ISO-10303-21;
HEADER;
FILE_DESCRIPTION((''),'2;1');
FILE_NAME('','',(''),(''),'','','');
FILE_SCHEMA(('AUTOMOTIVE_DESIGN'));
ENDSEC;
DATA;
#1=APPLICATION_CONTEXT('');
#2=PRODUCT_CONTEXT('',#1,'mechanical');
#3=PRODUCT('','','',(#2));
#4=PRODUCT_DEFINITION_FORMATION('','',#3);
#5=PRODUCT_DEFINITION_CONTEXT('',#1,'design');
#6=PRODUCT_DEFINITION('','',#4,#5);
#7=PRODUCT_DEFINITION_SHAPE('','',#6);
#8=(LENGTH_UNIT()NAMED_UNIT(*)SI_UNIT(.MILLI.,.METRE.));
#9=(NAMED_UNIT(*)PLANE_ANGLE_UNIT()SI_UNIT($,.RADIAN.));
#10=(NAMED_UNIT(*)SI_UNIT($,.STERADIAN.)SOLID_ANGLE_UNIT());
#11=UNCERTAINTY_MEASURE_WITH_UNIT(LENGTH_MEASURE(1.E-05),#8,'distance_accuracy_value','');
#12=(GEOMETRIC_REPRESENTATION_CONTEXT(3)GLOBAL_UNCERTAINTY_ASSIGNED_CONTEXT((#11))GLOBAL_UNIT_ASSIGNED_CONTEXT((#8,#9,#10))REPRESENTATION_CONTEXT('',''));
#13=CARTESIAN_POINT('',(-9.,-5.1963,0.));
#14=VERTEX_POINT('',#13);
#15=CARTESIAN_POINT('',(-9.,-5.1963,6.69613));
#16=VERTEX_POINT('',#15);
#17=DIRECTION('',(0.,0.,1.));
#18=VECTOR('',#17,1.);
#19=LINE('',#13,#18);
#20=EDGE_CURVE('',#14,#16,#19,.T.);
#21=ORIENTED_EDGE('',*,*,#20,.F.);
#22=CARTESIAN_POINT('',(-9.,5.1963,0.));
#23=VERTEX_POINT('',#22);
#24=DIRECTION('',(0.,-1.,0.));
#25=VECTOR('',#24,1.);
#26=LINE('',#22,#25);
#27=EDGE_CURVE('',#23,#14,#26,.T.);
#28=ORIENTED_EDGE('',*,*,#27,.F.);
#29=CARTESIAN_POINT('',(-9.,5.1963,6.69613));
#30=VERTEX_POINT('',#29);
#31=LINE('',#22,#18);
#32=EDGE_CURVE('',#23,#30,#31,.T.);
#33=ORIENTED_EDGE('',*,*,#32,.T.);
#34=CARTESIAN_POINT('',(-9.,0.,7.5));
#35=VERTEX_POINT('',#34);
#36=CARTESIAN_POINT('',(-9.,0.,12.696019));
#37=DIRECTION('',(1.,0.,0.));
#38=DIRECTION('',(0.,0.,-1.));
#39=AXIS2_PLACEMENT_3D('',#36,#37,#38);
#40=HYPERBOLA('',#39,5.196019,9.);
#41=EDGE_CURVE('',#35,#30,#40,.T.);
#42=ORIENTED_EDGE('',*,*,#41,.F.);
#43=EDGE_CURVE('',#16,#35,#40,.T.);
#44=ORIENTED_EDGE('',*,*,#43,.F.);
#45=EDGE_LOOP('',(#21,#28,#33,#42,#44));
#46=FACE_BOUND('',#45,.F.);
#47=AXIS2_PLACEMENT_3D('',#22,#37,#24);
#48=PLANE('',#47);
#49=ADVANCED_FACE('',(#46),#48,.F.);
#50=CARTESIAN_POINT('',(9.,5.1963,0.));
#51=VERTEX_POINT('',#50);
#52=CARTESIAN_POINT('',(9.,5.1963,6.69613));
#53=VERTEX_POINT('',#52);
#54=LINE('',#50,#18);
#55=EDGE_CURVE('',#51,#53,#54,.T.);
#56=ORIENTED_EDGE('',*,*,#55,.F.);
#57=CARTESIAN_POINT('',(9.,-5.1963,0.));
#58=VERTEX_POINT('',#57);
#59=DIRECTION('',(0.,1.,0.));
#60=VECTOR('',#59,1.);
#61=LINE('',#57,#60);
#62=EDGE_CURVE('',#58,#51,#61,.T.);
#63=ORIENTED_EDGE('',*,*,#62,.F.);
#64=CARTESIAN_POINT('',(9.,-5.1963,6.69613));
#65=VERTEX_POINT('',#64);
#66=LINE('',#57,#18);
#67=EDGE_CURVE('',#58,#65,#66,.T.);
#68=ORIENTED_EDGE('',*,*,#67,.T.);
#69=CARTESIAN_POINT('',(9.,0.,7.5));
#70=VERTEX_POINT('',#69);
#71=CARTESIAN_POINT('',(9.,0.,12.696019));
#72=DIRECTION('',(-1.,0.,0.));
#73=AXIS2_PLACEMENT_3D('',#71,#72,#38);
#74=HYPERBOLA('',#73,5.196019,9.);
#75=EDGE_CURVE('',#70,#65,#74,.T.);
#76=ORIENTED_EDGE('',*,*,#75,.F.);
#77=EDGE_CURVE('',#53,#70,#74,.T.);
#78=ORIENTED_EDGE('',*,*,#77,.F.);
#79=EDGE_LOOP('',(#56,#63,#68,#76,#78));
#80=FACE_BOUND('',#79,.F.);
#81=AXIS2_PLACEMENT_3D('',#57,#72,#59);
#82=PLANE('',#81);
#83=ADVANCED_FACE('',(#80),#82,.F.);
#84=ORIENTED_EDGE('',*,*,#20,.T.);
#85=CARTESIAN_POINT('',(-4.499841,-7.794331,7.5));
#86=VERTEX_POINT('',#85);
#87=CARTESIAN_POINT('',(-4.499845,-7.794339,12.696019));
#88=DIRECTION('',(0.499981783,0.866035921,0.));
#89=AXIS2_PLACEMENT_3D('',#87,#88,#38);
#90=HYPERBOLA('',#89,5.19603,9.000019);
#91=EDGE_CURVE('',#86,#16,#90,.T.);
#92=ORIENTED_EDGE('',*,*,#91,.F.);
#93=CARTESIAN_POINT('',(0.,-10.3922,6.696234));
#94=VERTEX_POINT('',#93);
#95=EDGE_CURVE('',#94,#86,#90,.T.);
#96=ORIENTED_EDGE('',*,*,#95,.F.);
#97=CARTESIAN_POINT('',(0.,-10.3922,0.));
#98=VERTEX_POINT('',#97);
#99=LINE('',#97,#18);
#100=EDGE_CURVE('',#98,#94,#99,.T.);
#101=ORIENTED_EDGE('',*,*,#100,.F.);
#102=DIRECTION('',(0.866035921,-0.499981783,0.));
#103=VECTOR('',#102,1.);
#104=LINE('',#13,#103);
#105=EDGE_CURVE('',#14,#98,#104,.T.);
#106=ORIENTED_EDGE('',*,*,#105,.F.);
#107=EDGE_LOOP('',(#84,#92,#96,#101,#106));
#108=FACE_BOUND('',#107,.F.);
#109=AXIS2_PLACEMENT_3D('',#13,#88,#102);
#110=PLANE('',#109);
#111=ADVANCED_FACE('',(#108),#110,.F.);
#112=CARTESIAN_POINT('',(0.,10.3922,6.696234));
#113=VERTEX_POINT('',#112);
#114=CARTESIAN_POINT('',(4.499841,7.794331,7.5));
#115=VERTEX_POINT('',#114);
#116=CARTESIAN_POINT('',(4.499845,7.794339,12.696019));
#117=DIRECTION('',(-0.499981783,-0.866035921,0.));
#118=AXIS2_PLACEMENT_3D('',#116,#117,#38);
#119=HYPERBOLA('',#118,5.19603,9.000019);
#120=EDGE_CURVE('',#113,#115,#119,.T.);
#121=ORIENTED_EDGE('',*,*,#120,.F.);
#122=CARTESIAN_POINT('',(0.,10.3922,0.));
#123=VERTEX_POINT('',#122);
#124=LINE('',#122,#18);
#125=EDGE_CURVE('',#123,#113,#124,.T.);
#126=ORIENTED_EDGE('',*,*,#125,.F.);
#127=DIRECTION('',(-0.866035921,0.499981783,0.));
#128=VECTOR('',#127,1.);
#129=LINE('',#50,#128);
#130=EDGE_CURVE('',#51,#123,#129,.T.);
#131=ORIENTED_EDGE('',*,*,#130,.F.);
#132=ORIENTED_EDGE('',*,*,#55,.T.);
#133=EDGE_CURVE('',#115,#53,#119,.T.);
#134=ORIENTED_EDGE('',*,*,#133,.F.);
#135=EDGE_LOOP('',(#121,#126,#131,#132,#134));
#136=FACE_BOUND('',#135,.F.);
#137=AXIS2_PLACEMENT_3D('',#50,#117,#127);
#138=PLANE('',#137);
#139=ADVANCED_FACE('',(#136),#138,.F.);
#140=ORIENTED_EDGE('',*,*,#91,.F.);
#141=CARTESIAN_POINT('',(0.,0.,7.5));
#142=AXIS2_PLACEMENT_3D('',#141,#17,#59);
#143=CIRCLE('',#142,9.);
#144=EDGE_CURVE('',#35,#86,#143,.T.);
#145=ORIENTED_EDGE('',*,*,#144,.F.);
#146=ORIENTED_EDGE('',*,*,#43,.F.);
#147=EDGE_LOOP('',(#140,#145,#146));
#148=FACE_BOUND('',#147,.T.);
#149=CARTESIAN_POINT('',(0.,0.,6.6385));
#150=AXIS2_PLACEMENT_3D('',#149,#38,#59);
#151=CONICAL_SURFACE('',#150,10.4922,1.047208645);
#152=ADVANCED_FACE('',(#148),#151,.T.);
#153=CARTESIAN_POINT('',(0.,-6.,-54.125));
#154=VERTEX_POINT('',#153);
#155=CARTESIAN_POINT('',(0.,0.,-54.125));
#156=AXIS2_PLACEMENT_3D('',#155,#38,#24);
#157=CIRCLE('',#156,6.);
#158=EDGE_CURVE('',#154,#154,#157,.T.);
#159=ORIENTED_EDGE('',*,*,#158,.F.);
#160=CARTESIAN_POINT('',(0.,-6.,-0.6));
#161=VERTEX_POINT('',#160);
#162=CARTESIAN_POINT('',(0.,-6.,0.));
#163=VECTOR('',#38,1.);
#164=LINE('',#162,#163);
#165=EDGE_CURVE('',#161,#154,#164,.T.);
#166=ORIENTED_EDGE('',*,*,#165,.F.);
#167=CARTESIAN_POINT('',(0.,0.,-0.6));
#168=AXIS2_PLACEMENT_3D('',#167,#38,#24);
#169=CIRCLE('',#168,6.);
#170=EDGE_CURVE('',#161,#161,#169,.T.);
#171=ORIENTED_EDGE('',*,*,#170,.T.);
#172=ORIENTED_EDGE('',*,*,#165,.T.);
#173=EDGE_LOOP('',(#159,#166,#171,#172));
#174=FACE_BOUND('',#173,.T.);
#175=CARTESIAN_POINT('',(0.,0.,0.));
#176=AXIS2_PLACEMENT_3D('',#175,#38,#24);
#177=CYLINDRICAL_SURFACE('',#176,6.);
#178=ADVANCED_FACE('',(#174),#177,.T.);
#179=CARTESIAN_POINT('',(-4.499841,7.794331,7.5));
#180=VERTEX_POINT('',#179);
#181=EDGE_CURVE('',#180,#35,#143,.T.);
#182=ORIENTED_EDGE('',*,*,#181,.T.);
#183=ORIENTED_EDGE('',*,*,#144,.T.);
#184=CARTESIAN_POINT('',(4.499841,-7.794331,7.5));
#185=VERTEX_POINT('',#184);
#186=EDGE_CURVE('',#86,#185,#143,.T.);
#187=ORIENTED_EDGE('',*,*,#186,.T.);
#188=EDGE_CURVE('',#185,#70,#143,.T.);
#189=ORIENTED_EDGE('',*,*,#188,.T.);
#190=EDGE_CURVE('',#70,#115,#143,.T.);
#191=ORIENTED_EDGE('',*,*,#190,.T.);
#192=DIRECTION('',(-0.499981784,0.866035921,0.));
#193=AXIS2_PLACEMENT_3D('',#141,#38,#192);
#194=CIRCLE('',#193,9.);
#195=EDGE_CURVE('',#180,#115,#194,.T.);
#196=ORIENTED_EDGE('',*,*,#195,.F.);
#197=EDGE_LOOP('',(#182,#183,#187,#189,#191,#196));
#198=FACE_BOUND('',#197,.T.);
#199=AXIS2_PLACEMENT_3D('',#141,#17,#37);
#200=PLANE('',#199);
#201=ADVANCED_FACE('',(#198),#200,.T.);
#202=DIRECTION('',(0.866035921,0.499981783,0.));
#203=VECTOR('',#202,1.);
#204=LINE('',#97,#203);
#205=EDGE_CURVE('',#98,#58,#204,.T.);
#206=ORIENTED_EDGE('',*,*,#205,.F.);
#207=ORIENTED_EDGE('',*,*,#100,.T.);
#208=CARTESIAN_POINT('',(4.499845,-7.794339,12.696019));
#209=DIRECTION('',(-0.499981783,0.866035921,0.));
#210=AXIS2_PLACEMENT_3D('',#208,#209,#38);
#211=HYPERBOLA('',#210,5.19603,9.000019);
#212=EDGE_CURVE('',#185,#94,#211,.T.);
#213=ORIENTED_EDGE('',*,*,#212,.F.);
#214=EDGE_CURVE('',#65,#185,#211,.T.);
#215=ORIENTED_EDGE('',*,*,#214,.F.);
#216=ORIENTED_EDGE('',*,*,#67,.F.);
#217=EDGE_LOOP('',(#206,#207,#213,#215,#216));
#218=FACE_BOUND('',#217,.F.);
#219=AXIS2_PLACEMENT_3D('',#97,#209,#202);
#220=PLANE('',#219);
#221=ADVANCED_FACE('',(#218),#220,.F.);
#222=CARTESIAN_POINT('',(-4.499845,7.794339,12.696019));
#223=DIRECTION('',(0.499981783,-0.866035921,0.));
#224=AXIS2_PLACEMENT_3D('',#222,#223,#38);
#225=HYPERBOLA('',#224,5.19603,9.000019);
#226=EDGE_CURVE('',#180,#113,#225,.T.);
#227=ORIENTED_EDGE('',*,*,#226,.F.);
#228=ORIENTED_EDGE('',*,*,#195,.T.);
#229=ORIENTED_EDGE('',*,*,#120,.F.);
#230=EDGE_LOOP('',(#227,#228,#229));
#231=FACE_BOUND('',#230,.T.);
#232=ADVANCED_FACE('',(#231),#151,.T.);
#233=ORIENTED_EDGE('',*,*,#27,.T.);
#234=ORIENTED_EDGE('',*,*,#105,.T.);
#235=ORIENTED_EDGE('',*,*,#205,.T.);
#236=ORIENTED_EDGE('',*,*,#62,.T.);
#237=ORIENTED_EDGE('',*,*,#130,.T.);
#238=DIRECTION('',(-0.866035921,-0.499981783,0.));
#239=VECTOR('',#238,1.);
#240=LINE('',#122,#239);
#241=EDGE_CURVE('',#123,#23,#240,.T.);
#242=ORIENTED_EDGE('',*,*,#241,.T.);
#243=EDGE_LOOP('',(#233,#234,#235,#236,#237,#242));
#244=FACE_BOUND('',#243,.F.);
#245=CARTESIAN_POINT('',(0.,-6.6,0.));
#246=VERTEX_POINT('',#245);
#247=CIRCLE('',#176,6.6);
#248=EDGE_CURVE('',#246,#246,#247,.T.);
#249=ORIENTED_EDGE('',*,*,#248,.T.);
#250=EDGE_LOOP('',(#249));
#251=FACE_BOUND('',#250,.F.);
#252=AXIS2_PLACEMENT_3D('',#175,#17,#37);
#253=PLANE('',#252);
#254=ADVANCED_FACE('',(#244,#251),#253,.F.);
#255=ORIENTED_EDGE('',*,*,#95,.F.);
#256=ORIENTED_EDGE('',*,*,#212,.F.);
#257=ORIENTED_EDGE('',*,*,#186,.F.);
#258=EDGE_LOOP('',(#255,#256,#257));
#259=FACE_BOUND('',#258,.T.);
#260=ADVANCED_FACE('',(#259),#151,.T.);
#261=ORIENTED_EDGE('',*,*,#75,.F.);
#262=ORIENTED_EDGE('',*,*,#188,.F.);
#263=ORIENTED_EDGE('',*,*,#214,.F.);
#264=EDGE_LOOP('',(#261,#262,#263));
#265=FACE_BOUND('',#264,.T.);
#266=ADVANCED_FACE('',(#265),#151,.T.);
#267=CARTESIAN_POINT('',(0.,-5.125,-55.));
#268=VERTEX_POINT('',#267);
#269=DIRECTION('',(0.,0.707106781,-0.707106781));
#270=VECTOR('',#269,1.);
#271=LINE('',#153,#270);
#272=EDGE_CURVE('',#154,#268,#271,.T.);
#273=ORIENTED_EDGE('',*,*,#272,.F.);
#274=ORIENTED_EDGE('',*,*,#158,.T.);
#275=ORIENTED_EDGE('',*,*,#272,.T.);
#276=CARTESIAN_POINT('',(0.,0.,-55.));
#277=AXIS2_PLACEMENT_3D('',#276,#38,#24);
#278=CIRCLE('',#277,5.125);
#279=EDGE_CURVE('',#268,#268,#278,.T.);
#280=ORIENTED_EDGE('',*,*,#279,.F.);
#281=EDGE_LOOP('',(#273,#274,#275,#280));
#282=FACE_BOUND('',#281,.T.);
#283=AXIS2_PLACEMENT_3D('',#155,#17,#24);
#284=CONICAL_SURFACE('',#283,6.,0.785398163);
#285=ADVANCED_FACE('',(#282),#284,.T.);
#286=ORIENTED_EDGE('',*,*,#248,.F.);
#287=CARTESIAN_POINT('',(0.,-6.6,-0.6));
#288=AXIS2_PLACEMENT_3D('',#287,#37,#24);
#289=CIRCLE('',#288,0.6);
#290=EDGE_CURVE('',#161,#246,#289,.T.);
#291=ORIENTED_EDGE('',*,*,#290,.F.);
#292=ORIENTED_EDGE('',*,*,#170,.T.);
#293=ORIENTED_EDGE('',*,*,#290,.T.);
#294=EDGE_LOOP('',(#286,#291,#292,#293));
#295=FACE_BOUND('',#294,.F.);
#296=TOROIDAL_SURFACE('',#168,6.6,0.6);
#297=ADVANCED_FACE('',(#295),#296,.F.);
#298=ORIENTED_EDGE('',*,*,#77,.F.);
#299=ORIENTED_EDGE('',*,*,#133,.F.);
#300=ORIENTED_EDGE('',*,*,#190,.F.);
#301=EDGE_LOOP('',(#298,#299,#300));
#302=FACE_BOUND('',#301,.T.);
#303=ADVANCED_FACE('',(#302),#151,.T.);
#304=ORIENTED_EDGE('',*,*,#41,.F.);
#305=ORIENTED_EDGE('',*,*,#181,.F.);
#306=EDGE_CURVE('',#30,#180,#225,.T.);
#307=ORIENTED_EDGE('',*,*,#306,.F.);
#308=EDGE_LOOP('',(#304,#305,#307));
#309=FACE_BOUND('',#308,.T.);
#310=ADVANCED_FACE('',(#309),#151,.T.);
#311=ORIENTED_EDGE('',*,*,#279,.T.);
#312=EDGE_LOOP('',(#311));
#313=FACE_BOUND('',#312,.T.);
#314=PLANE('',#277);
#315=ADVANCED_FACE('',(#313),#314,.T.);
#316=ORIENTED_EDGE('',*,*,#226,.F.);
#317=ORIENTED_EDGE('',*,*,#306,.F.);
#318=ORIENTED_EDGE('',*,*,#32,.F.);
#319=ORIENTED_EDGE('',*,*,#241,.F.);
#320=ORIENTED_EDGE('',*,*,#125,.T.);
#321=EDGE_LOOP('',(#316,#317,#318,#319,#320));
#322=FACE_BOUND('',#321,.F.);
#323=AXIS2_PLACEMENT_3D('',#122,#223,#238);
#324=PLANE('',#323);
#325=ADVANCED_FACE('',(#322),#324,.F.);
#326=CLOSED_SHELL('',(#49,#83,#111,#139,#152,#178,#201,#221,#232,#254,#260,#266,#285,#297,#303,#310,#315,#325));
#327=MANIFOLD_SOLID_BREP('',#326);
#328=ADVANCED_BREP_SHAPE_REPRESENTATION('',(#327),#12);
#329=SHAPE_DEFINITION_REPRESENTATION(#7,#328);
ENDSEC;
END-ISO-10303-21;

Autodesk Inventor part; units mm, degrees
ref_plane "WorkPlane1" through (0, 0, 0) normal (0, 0, 1) x (1, 0, 0)
sketch "Sketch1" plane through (0, 0, 0) normal (0, 0, 1) x (1, 0, 0)
  point P0 (0, 0)
sketch "Sketch2" plane through (0, 0, 0) normal (0, 0, 1) x (1, 0, 0)
  line L0 (-9, 5.1963) -> (-9, -5.1963)
  line L1 (0, 10.3922) -> (-9, 5.1963)
  line L2 (9, 5.1963) -> (0, 10.3922)
  line L3 (9, -5.1963) -> (9, 5.1963)
  line L4 (0, -10.3922) -> (9, -5.1963)
  line L5 (-9, -5.1963) -> (0, -10.3922)
  circle A0 centre (0, 0) radius 9 construction
  dimension "d1" = 18
  dimension "d29" = 0
  dimension "d30" = 0
extrude "Extrusion1" add sketch "Sketch2" along normal blind 7.5
sketch "Sketch3" plane through (0, 0, 0) normal (1, 0, 0) x (0, 1, 0)
  line L0 (9, 7.5) -> (10.4922, 7.5)
  line L1 (10.4922, 6.6385) -> (9, 7.5)
  line L2 (10.4922, 7.5) -> (10.4922, 6.6385)
  line L3 (0, -1.5) -> (0, 9) projected
  line L4 (10.3922, 0) -> (10.3922, 7.5) projected
  dimension "d25" = 0.1
  dimension "d26" = 0
  dimension "d27" = 60
  dimension "d28" = 9
revolve "Revolution1" cut sketch "Sketch3" angle 360 about axis through (0, 0, -10) along (0, 0, 1)
sketch "Sketch4" plane through (0, 0, 0) normal (1, 0, 0) x (0, 1, 0)
  line L0 (0, -55) -> (0, 0)
  line L1 (-6, -55) -> (0, -55)
  line L2 (-6, 0) -> (-6, -55)
  line L3 (0, 0) -> (-6, 0)
  line L4 (0, -55) -> (0, 0)
  line L5 (-7.2, 0) -> (1.2, 0) projected
  line L6 (0, -66) -> (0, 11) projected
  dimension "d18" = 6
  dimension "d20" = 55
  dimension "d33" = 0
  dimension "d34" = 0
revolve "Revolution2" add sketch "Sketch4" angle 360 about axis through (0, 0, -55) along (0, 0, -1)
chamfer "Chamfer1" distance 0.875 angle 45 1 edges at (0, 6, -55)
fillet "Fillet1" radius 0.6 1 edges at (0, 6, 0)
thread "Thread1" size "M12x1.75" class "6g" standard "ISO Metric profile" length 30
ref_plane "MSC_PF1" through (0, 0, 0) normal (1, 0, 0) x (0, 1, 0)
ref_plane "MSC_PT1" through (0, 0, 0) normal (0, 0, -1) x (-1, 0, 0)
equation "\"d22\" = 0.5 * PTC"
equation "\"d23\" = 0.5 * PTC"
equation "\"d24\" = r"
equation "\"d1\" = ParS"
equation "\"d6\" = ParK"
equation "\"d28\" = 0.5 * ParS"
equation "\"d18\" = 0.5 * NND"
equation "\"d20\" = NLG"
equation "\"NND\" = 12"
equation "\"NLG\" = 55"
equation "\"PTC\" = 1.75"
equation "\"ParK\" = 7.5"
equation "\"ParS\" = 18"
equation "\"msp_es\" = 0.577367 * ParS"
equation "\"r\" = 0.6"
equation "\"THREADDIA\" = NND"
equation "\"K1\" = 4.94"
properties part number "DIN EN ISO 4016 - M12x55" material "Steel"
